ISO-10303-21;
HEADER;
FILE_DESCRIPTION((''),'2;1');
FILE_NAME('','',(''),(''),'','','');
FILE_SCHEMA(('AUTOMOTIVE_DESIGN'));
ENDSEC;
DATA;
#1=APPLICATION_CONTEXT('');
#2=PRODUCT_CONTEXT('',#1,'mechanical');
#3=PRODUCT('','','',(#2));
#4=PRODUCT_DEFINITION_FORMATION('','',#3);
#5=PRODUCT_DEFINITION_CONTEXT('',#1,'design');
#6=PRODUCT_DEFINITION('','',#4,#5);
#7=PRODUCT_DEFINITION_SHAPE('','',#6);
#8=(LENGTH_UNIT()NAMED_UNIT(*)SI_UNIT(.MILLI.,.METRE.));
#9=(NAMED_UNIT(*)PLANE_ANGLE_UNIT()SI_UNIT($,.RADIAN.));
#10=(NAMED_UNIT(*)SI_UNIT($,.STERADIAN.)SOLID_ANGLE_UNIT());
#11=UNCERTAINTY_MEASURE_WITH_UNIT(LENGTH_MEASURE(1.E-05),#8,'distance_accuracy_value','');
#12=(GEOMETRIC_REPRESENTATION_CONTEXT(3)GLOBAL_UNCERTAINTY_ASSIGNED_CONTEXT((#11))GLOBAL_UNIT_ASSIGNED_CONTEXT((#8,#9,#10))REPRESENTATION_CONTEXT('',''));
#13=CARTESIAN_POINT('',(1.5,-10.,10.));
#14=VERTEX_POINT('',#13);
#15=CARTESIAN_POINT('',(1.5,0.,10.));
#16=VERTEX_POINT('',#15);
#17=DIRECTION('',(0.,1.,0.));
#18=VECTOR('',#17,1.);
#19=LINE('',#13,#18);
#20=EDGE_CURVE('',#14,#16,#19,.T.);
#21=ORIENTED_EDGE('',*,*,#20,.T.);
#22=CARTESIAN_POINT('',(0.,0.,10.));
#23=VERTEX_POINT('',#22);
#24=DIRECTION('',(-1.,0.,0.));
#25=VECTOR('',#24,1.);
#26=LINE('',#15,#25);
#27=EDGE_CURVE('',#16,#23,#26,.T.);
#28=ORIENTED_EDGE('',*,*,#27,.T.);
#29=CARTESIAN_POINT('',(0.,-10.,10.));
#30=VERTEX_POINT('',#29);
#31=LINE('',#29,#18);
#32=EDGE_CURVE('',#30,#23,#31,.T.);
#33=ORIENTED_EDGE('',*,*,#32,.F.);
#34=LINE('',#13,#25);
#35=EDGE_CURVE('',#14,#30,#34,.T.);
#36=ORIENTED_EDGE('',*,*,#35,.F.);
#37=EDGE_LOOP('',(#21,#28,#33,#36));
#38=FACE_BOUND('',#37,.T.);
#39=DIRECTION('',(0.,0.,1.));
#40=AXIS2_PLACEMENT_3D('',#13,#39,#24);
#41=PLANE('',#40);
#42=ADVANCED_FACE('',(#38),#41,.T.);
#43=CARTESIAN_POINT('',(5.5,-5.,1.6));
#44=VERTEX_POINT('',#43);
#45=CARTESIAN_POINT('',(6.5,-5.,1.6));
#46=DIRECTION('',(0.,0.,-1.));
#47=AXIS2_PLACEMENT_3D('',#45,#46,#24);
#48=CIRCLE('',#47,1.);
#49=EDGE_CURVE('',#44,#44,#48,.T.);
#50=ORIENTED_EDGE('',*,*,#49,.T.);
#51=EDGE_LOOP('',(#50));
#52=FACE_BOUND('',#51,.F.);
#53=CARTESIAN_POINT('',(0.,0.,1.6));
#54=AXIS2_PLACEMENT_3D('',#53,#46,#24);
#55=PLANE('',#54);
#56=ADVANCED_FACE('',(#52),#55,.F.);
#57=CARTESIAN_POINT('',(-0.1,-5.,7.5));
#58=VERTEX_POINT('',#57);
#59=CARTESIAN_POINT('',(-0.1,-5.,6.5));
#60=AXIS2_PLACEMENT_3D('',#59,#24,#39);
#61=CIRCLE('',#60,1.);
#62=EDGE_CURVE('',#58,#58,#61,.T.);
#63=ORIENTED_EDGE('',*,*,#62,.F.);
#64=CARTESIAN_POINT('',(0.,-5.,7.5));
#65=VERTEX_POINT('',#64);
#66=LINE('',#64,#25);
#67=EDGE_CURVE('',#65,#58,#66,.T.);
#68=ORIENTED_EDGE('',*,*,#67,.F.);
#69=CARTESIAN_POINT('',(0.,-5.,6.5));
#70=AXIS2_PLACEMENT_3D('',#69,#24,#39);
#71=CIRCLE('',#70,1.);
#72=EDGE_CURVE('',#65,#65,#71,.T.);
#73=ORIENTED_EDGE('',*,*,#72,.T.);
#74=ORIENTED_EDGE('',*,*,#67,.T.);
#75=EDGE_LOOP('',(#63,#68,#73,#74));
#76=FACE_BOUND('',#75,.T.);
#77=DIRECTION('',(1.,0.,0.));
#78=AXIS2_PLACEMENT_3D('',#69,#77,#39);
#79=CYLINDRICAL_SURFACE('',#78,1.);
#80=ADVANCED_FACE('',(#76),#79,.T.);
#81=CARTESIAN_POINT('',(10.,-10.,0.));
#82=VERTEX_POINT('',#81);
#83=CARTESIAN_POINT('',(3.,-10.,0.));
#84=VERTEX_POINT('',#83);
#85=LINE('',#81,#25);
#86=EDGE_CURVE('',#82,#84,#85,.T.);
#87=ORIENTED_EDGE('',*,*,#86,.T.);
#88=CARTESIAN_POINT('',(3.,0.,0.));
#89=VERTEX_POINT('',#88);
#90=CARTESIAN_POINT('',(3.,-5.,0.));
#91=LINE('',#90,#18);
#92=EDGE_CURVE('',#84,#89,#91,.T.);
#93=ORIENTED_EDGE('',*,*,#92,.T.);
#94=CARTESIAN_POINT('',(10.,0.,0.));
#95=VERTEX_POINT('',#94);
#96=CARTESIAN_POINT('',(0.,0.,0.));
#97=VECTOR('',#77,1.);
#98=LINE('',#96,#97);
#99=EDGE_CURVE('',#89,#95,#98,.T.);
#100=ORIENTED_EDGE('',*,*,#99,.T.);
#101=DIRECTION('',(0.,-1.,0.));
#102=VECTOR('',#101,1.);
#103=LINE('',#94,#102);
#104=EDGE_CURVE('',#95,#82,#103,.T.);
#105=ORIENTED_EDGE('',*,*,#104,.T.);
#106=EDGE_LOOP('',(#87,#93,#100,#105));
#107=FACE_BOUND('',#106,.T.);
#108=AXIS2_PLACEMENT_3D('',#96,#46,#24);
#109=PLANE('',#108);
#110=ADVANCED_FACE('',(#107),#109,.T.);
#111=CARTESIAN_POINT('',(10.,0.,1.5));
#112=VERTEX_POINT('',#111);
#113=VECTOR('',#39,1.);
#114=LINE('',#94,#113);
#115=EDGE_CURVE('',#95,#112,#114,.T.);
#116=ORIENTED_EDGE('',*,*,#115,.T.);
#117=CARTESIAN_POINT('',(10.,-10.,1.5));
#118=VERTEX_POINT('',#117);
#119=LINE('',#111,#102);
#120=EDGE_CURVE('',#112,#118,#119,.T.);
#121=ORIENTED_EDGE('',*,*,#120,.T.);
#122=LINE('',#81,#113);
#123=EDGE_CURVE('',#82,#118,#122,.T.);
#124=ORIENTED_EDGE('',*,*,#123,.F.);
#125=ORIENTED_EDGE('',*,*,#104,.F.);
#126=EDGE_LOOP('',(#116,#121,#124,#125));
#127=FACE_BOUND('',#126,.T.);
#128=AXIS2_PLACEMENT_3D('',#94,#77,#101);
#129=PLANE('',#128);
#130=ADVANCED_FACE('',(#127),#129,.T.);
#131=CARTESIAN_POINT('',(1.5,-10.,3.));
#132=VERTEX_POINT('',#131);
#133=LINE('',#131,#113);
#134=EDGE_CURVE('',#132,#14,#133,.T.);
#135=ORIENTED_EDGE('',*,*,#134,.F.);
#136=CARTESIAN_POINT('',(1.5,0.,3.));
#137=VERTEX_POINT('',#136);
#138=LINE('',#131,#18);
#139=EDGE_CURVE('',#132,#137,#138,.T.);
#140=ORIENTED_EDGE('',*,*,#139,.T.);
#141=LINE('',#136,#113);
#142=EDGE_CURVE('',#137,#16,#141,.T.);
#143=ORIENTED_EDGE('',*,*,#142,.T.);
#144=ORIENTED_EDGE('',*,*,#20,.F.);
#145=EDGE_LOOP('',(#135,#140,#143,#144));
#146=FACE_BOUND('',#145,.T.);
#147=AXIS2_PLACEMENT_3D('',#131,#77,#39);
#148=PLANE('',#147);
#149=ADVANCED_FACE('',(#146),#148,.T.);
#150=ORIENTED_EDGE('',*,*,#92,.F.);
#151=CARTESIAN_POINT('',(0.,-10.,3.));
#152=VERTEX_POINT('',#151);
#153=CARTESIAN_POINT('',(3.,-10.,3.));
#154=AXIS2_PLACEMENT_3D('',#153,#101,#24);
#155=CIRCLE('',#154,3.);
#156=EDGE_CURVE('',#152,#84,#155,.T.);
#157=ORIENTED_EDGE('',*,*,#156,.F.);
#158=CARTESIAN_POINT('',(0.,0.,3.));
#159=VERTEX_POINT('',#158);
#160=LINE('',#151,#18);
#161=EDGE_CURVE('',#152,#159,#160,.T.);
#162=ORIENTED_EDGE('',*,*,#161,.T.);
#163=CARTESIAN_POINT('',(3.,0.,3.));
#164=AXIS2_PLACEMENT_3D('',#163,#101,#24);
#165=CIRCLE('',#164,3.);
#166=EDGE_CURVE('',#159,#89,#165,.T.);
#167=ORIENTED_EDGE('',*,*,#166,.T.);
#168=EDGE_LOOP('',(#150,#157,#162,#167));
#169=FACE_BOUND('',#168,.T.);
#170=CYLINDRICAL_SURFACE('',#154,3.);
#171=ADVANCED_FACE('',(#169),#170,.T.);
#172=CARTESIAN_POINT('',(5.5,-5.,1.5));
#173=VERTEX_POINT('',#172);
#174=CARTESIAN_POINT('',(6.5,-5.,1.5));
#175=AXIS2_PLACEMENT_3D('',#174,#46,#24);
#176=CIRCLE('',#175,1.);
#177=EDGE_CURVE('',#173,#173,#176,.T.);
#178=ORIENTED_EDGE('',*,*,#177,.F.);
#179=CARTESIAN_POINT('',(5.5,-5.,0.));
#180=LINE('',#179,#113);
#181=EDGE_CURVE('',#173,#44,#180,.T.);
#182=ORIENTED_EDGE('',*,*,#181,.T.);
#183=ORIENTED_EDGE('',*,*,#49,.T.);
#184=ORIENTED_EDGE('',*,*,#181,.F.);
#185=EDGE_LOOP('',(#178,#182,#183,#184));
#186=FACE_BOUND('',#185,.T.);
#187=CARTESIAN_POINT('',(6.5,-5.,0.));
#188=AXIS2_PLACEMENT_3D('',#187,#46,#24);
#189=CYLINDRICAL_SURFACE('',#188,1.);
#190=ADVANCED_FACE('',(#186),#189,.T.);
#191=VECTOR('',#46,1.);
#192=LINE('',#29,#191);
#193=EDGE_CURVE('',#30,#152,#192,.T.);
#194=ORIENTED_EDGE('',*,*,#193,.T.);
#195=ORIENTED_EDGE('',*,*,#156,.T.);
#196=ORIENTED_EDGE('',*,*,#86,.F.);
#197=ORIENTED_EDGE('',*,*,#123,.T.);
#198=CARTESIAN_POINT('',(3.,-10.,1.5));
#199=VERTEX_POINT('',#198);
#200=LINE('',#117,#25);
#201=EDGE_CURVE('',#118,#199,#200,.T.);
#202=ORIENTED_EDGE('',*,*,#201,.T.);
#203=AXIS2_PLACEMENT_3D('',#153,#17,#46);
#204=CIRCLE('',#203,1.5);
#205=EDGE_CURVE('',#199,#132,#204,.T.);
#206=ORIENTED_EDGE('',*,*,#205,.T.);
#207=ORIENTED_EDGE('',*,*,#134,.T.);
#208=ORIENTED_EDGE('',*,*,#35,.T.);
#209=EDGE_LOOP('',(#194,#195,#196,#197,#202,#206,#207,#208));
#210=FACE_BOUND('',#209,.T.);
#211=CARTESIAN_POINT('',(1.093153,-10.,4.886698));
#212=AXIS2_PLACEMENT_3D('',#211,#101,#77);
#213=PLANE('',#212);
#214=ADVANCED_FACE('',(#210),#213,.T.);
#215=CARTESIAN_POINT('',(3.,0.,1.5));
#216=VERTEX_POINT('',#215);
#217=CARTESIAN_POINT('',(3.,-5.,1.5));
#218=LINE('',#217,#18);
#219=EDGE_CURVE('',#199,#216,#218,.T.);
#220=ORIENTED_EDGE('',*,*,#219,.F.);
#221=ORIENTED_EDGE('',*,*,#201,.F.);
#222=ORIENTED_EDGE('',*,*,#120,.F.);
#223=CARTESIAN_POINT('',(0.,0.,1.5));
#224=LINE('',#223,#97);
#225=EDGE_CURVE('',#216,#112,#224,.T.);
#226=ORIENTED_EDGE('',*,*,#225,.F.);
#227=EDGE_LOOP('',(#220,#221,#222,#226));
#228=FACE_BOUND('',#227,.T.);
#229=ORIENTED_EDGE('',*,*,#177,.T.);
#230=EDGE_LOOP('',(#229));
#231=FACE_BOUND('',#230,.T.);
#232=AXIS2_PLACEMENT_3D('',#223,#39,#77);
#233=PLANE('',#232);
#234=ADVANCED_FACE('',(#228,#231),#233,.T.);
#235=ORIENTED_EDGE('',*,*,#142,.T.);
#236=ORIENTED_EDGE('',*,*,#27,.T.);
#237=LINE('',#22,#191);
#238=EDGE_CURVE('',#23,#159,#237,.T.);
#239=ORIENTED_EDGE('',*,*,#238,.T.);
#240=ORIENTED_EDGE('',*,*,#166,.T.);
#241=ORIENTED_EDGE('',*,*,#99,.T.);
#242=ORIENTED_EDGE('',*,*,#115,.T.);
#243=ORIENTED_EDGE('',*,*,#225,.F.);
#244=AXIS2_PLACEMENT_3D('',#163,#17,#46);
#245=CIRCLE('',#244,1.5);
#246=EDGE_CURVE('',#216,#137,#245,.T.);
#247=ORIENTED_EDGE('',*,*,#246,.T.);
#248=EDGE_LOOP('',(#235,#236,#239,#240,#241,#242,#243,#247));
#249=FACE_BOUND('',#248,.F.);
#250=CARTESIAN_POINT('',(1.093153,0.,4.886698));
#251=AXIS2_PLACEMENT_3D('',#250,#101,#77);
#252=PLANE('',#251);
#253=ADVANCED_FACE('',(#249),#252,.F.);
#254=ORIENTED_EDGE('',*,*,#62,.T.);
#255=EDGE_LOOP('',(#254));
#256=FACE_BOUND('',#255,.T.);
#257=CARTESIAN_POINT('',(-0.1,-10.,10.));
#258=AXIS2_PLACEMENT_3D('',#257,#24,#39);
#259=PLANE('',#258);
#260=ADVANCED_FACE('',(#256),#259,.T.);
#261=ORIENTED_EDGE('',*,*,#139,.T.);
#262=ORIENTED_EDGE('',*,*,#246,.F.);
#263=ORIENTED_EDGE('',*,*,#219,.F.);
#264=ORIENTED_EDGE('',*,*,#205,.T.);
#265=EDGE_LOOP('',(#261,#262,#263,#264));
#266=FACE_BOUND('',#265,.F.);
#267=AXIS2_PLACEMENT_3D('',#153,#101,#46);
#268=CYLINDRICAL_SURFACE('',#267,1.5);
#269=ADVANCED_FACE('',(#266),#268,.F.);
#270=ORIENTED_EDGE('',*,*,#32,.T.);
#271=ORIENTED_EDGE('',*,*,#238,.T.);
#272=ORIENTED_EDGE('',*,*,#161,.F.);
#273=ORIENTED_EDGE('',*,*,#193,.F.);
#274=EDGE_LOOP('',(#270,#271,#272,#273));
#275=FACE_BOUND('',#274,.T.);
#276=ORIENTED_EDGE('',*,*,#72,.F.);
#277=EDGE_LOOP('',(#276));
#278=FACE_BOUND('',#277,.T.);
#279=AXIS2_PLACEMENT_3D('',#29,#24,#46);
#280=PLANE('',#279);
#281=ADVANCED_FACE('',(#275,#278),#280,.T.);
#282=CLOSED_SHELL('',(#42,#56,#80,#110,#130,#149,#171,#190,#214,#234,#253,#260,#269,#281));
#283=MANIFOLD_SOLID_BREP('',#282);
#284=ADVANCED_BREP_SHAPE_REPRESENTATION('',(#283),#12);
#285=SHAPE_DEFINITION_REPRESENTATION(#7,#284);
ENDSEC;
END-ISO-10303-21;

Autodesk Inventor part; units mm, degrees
ref_plane "YZ Plane" through (0, 0, 0) normal (1, 0, 0) x (0, 1, 0)
ref_plane "XZ Plane" through (0, 0, 0) normal (0, 1, 0) x (-1, 0, 0)
ref_plane "XY Plane" through (0, 0, 0) normal (0, 0, 1) x (1, 0, 0)
sketch "Sketch1" plane through (0, 0, 0) normal (0, 0, 1) x (1, 0, 0)
  line L0 (0, 0) -> (10, 0)
  line L1 (10, 0) -> (10, -10)
  line L2 (10, -10) -> (0, -10)
  line L3 (0, -10) -> (0, 0)
  dimension "d0" = 10
  dimension "d1" = 10
extrude "Extrusion1" add sketch "Sketch1" along normal blind 1.5
sketch "Sketch2" plane through (1.5, -10, 0) normal (-1, 0, 0) x (0, -1, 0)
  line L0 (-10, 0) -> (0, 0)
  line L1 (0, 0) -> (0, 10)
  line L2 (0, 10) -> (-10, 10)
  line L3 (-10, 10) -> (-10, 0)
edge flange "Flange1" height 10 angle 90 thickness 1.5 bend radius 1.5 thickness toward (-1, 0, 0) relief tear relief width 1.5 relief depth 0.75 edges at (0, -5, 1.5) wall of the first edge with corners at (1.5, 0, 0) (1.5, -10, 0) (1.5, -10, 10) (1.5, 0, 10)
bend "Bend1"
corner "Corner1"
sketch "Sketch3" plane through (0, -10, 10) normal (-1, 0, 0) x (0, 0, 1)
  circle A0 centre (-3.5, 5) radius 1
  line L0 (0, 10) -> (0, 0) projected
  line L1 (-7, 10) -> (0, 10) projected
  point P0 (-10, 10)
  dimension "d15" = 2
  dimension "d16" = 3.5
  dimension "d17" = 5
extrude "Extrusion2" add sketch "Sketch3" along normal blind 0.1
sketch "Sketch4" plane through (0, 0, 0) normal (0, 0, -1) x (-1, 0, 0)
  circle A0 centre (-6.5, -5) radius 1
  line L0 (-10, -10) -> (-3, -10) projected
  line L1 (-10, 0) -> (-10, -10) projected
  point P0 (0, 0)
  dimension "d20" = 2
  dimension "d21" = 5
  dimension "d22" = 3.5
extrude "Extrusion3" add sketch "Sketch4" against normal blind 1.6
sketch "Sketch5" plane through (0, 0, 1.5) normal (0, 0, 1) x (1, 0, 0)
  line L0 (3, 0) -> (3, -10) projected
  circle A0 centre (6.5, -5) radius 1 projected
  point P0 (0, 0)
equation "\"d4\" = Thickness"
equation "\"d5\" = BendReliefWidth"
equation "\"d6\" = BendReliefDepth"
equation "\"d7\" = MinimumRemnant"
equation "\"d8\" = TransitionRadius"
equation "\"d11\" = BendRadius"
equation "\"d12\" = CornerReliefSize"
equation "\"d13\" = GapSize"
equation "\"d14\" = JacobiRadiusSize"
equation "\"BendRadius\" = Thickness"
equation "\"BendReliefWidth\" = Thickness"
equation "\"BendReliefDepth\" = 0.5 * Thickness"
equation "\"CornerReliefSize\" = 4 * Thickness"
equation "\"MinimumRemnant\" = 2 * Thickness"
equation "\"TransitionRadius\" = BendRadius"
equation "\"JacobiRadiusSize\" = BendRadius"
equation "\"GapSize\" = Thickness"
equation "\"Thickness\" = 1.5"
properties part number "center_joint"
